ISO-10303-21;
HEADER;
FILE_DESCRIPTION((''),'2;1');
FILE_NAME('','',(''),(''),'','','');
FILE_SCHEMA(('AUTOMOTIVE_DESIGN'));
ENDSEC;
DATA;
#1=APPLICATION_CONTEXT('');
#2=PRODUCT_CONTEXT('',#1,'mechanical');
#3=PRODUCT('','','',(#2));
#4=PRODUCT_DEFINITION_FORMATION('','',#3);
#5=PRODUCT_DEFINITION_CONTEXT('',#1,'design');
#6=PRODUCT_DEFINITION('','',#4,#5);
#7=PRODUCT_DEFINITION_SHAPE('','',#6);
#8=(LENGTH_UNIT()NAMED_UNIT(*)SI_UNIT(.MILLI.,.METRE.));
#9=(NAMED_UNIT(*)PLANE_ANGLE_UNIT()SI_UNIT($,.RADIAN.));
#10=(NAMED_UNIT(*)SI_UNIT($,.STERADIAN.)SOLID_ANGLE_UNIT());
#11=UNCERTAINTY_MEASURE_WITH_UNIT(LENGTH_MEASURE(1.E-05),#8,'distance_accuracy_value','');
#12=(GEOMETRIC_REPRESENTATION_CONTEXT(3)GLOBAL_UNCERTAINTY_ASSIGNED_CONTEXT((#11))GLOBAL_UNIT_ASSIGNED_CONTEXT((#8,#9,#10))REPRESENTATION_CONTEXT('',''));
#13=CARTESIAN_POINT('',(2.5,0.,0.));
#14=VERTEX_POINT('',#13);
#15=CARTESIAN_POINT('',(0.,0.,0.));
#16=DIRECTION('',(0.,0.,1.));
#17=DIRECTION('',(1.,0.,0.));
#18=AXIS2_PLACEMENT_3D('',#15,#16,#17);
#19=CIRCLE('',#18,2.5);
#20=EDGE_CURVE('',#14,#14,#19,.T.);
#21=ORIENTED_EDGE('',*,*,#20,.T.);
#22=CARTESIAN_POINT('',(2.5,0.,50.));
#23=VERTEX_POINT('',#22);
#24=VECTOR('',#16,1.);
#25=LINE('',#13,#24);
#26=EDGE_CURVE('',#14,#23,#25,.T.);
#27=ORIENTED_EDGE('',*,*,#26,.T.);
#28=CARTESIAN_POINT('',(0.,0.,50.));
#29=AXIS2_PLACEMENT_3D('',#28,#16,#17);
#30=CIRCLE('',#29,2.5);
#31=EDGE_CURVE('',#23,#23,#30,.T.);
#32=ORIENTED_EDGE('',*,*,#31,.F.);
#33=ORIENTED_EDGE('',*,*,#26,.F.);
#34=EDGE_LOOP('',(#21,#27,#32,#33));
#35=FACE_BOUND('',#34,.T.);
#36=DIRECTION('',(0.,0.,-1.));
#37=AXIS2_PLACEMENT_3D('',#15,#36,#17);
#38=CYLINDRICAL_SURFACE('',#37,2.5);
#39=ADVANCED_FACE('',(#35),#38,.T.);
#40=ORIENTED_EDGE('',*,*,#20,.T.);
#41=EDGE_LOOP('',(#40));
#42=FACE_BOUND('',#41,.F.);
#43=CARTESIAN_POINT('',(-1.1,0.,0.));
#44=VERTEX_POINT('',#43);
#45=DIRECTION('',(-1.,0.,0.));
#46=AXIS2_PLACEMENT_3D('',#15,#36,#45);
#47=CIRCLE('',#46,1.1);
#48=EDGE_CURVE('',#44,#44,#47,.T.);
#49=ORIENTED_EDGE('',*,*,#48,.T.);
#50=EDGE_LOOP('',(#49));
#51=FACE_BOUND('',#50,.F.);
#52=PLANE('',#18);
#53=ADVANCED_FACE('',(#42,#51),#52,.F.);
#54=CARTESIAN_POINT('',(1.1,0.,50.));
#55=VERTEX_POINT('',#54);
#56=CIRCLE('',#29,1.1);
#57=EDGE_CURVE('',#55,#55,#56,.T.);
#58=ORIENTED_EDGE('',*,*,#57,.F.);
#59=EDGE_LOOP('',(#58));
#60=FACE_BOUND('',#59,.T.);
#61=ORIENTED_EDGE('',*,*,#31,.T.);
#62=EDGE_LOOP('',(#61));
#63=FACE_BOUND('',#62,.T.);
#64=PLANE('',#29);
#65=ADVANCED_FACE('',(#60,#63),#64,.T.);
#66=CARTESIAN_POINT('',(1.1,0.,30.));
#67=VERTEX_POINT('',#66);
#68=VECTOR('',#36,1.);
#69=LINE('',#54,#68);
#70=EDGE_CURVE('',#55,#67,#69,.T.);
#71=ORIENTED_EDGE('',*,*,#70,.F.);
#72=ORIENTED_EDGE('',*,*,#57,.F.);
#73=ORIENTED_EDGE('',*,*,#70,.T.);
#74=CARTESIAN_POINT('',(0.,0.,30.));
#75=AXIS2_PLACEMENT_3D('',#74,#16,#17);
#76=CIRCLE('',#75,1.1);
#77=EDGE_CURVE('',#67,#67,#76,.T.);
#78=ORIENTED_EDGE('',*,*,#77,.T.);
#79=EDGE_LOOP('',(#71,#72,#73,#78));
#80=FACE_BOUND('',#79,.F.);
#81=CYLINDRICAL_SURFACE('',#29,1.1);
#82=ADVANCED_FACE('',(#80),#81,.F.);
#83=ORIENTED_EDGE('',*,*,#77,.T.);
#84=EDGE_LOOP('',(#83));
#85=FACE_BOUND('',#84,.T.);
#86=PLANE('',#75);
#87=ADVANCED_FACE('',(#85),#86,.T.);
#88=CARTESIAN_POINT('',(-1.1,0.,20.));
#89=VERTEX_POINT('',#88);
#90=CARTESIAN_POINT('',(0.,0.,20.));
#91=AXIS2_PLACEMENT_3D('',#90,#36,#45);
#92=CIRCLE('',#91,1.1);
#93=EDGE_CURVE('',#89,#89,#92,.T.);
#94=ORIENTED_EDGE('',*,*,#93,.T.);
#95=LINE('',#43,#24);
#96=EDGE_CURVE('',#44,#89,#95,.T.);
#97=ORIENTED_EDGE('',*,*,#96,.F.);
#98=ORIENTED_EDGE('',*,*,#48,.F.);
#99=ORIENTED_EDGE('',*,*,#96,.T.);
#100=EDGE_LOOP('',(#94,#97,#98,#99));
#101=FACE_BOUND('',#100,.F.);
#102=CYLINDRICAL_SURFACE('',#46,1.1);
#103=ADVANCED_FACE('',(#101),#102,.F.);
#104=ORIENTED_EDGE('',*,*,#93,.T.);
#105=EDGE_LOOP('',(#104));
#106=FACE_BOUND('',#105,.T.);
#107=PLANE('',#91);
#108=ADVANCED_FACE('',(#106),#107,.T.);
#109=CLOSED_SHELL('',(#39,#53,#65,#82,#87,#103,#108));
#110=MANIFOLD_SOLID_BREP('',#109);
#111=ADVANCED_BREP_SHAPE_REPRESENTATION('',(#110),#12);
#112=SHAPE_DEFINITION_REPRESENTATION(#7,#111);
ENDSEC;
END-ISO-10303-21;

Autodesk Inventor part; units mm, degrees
ref_plane "YZ Plane" through (0, 0, 0) normal (1, 0, 0) x (0, 1, 0)
ref_plane "XZ Plane" through (0, 0, 0) normal (0, 1, 0) x (-1, 0, 0)
ref_plane "XY Plane" through (0, 0, 0) normal (0, 0, 1) x (1, 0, 0)
sketch "Sketch1" plane through (0, 0, 0) normal (0, 0, 1) x (1, 0, 0)
  circle A0 centre (0, 0) radius 2.5
  dimension "d0" = 5
extrude "Extrusion1" add sketch "Sketch1" along normal blind 50
sketch "Sketch2" plane through (0, 0, 50) normal (0, 0, 1) x (1, 0, 0)
  circle A0 centre (0, 0) radius 1.1
  dimension "d3" = 2.2
extrude "Extrusion2" cut sketch "Sketch2" against normal blind 20
sketch "Sketch3" plane through (0, 0, 0) normal (0, 0, -1) x (-1, 0, 0)
  circle A0 centre (0, 0) radius 1.1 projected
extrude "Extrusion3" cut sketch "Sketch3" against normal blind 20
thread "Thread1" size "M2.5x0.45" class "6H" standard "ANSI Metric M Profile" length 16
thread "Thread2" size "M2.5x0.45" class "6H" standard "ANSI Metric M Profile" length 16
properties part number "AxisLinear"
